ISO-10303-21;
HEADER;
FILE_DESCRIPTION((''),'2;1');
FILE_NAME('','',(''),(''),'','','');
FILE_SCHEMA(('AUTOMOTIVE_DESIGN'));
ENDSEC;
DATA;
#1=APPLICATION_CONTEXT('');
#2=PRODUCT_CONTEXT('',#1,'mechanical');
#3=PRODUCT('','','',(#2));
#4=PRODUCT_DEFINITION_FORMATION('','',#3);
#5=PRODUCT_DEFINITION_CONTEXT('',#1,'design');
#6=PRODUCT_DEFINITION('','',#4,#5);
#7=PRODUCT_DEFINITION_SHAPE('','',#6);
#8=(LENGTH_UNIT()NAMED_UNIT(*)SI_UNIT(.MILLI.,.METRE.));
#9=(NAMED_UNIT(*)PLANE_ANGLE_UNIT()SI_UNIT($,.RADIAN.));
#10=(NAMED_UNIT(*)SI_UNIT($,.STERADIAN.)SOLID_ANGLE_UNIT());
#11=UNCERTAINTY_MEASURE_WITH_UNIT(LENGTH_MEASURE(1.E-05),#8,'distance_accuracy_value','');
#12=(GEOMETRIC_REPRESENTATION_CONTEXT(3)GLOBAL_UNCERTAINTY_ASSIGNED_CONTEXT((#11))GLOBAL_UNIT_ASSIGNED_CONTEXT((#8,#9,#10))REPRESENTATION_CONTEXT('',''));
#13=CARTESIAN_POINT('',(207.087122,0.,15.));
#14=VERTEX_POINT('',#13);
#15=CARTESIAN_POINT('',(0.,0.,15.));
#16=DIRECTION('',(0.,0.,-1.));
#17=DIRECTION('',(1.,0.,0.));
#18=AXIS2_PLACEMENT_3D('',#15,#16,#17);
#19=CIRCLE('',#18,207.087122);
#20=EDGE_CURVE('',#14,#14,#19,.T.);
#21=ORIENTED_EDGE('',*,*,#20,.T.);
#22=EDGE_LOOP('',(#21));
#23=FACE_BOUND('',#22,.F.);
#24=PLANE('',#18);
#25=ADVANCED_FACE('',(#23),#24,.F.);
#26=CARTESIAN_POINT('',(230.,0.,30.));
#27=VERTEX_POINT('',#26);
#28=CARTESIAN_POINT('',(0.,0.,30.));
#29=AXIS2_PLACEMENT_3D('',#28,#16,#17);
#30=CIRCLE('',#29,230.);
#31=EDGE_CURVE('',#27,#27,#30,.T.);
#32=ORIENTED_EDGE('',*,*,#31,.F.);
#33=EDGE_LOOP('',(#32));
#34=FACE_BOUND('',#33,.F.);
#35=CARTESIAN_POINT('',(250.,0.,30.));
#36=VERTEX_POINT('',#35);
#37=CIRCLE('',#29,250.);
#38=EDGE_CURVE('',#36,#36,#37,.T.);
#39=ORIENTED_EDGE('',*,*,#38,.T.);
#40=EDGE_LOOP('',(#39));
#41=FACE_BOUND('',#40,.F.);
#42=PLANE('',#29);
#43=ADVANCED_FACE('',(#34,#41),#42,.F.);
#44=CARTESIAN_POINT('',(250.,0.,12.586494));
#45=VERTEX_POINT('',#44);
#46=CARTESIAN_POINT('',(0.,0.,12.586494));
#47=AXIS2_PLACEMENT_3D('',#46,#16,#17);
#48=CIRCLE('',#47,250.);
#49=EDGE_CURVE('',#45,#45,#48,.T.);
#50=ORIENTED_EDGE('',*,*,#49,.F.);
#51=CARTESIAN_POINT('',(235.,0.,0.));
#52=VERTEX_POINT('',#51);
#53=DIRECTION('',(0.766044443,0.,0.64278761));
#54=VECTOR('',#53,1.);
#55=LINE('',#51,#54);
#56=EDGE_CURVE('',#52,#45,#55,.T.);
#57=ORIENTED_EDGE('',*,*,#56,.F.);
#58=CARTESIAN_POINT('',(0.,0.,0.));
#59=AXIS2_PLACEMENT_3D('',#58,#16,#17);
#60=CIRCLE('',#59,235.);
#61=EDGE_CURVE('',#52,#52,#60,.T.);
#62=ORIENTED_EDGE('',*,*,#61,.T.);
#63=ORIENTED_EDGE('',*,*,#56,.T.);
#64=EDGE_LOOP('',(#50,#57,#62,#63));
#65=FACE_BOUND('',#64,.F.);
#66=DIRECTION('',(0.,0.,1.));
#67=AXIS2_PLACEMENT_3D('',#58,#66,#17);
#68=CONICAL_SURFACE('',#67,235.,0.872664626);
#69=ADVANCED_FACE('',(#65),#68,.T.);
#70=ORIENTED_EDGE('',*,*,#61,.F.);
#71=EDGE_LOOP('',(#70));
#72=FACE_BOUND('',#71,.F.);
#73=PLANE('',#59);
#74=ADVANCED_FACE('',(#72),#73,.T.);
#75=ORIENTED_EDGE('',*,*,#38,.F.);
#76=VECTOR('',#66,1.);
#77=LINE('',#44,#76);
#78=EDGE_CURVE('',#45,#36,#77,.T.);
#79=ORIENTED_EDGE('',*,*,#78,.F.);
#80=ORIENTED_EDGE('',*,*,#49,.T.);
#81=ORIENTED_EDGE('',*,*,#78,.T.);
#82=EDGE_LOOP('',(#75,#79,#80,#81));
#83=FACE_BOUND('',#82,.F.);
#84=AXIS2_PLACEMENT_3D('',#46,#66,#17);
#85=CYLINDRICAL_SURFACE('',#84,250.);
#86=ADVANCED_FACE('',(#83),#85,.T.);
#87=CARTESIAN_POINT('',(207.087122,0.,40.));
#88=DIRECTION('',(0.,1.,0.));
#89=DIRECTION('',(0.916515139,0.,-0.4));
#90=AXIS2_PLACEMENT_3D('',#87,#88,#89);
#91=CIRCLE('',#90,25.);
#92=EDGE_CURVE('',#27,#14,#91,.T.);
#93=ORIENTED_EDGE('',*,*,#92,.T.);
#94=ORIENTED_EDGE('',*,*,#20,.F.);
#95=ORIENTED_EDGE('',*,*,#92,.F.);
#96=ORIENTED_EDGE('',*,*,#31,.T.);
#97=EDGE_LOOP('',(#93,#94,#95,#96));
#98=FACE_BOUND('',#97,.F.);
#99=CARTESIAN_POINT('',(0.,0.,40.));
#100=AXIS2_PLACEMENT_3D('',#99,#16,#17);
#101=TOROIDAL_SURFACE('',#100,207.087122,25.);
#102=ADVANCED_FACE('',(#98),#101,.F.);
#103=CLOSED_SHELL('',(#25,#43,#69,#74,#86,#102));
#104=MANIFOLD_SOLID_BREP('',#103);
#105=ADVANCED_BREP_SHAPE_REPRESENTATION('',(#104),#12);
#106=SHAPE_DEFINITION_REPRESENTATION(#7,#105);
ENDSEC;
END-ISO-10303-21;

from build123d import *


# Not quite as in the source:
# - a fillet or chamfer that OpenCascade refuses, or shapes differently, is made with other operations: its cross-section is extruded or revolved along the edge and cut away or added


with BuildPart() as f1:
    # F0 (on Front) → F1 (revolve)
    with BuildSketch(Plane.XZ):
        Polygon((0, 15), (0, 0), (235, 0), (250, 12.5864944677), (250, 30), (230, 30), (230, 15), align=None)
    revolve(axis=Axis((0, 0, 7.5), (0, 0, -1)))

    # F2: fillet of radius 25 on 1 edges, made by hand

    # F2_s1 → F2_t2 (revolve)
    with BuildSketch(Plane.XZ):
        with BuildLine():
            ThreePointArc((230, 30), (220.7801854628, 19.0834993366), (207.0871215252, 15))
            Line((207.0871215252, 15), (230, 15))
            Line((230, 15), (230, 30))
        make_face()
    revolve(axis=Axis((0, 0, 15), (0, 0, -1)))


solid = f1.part
